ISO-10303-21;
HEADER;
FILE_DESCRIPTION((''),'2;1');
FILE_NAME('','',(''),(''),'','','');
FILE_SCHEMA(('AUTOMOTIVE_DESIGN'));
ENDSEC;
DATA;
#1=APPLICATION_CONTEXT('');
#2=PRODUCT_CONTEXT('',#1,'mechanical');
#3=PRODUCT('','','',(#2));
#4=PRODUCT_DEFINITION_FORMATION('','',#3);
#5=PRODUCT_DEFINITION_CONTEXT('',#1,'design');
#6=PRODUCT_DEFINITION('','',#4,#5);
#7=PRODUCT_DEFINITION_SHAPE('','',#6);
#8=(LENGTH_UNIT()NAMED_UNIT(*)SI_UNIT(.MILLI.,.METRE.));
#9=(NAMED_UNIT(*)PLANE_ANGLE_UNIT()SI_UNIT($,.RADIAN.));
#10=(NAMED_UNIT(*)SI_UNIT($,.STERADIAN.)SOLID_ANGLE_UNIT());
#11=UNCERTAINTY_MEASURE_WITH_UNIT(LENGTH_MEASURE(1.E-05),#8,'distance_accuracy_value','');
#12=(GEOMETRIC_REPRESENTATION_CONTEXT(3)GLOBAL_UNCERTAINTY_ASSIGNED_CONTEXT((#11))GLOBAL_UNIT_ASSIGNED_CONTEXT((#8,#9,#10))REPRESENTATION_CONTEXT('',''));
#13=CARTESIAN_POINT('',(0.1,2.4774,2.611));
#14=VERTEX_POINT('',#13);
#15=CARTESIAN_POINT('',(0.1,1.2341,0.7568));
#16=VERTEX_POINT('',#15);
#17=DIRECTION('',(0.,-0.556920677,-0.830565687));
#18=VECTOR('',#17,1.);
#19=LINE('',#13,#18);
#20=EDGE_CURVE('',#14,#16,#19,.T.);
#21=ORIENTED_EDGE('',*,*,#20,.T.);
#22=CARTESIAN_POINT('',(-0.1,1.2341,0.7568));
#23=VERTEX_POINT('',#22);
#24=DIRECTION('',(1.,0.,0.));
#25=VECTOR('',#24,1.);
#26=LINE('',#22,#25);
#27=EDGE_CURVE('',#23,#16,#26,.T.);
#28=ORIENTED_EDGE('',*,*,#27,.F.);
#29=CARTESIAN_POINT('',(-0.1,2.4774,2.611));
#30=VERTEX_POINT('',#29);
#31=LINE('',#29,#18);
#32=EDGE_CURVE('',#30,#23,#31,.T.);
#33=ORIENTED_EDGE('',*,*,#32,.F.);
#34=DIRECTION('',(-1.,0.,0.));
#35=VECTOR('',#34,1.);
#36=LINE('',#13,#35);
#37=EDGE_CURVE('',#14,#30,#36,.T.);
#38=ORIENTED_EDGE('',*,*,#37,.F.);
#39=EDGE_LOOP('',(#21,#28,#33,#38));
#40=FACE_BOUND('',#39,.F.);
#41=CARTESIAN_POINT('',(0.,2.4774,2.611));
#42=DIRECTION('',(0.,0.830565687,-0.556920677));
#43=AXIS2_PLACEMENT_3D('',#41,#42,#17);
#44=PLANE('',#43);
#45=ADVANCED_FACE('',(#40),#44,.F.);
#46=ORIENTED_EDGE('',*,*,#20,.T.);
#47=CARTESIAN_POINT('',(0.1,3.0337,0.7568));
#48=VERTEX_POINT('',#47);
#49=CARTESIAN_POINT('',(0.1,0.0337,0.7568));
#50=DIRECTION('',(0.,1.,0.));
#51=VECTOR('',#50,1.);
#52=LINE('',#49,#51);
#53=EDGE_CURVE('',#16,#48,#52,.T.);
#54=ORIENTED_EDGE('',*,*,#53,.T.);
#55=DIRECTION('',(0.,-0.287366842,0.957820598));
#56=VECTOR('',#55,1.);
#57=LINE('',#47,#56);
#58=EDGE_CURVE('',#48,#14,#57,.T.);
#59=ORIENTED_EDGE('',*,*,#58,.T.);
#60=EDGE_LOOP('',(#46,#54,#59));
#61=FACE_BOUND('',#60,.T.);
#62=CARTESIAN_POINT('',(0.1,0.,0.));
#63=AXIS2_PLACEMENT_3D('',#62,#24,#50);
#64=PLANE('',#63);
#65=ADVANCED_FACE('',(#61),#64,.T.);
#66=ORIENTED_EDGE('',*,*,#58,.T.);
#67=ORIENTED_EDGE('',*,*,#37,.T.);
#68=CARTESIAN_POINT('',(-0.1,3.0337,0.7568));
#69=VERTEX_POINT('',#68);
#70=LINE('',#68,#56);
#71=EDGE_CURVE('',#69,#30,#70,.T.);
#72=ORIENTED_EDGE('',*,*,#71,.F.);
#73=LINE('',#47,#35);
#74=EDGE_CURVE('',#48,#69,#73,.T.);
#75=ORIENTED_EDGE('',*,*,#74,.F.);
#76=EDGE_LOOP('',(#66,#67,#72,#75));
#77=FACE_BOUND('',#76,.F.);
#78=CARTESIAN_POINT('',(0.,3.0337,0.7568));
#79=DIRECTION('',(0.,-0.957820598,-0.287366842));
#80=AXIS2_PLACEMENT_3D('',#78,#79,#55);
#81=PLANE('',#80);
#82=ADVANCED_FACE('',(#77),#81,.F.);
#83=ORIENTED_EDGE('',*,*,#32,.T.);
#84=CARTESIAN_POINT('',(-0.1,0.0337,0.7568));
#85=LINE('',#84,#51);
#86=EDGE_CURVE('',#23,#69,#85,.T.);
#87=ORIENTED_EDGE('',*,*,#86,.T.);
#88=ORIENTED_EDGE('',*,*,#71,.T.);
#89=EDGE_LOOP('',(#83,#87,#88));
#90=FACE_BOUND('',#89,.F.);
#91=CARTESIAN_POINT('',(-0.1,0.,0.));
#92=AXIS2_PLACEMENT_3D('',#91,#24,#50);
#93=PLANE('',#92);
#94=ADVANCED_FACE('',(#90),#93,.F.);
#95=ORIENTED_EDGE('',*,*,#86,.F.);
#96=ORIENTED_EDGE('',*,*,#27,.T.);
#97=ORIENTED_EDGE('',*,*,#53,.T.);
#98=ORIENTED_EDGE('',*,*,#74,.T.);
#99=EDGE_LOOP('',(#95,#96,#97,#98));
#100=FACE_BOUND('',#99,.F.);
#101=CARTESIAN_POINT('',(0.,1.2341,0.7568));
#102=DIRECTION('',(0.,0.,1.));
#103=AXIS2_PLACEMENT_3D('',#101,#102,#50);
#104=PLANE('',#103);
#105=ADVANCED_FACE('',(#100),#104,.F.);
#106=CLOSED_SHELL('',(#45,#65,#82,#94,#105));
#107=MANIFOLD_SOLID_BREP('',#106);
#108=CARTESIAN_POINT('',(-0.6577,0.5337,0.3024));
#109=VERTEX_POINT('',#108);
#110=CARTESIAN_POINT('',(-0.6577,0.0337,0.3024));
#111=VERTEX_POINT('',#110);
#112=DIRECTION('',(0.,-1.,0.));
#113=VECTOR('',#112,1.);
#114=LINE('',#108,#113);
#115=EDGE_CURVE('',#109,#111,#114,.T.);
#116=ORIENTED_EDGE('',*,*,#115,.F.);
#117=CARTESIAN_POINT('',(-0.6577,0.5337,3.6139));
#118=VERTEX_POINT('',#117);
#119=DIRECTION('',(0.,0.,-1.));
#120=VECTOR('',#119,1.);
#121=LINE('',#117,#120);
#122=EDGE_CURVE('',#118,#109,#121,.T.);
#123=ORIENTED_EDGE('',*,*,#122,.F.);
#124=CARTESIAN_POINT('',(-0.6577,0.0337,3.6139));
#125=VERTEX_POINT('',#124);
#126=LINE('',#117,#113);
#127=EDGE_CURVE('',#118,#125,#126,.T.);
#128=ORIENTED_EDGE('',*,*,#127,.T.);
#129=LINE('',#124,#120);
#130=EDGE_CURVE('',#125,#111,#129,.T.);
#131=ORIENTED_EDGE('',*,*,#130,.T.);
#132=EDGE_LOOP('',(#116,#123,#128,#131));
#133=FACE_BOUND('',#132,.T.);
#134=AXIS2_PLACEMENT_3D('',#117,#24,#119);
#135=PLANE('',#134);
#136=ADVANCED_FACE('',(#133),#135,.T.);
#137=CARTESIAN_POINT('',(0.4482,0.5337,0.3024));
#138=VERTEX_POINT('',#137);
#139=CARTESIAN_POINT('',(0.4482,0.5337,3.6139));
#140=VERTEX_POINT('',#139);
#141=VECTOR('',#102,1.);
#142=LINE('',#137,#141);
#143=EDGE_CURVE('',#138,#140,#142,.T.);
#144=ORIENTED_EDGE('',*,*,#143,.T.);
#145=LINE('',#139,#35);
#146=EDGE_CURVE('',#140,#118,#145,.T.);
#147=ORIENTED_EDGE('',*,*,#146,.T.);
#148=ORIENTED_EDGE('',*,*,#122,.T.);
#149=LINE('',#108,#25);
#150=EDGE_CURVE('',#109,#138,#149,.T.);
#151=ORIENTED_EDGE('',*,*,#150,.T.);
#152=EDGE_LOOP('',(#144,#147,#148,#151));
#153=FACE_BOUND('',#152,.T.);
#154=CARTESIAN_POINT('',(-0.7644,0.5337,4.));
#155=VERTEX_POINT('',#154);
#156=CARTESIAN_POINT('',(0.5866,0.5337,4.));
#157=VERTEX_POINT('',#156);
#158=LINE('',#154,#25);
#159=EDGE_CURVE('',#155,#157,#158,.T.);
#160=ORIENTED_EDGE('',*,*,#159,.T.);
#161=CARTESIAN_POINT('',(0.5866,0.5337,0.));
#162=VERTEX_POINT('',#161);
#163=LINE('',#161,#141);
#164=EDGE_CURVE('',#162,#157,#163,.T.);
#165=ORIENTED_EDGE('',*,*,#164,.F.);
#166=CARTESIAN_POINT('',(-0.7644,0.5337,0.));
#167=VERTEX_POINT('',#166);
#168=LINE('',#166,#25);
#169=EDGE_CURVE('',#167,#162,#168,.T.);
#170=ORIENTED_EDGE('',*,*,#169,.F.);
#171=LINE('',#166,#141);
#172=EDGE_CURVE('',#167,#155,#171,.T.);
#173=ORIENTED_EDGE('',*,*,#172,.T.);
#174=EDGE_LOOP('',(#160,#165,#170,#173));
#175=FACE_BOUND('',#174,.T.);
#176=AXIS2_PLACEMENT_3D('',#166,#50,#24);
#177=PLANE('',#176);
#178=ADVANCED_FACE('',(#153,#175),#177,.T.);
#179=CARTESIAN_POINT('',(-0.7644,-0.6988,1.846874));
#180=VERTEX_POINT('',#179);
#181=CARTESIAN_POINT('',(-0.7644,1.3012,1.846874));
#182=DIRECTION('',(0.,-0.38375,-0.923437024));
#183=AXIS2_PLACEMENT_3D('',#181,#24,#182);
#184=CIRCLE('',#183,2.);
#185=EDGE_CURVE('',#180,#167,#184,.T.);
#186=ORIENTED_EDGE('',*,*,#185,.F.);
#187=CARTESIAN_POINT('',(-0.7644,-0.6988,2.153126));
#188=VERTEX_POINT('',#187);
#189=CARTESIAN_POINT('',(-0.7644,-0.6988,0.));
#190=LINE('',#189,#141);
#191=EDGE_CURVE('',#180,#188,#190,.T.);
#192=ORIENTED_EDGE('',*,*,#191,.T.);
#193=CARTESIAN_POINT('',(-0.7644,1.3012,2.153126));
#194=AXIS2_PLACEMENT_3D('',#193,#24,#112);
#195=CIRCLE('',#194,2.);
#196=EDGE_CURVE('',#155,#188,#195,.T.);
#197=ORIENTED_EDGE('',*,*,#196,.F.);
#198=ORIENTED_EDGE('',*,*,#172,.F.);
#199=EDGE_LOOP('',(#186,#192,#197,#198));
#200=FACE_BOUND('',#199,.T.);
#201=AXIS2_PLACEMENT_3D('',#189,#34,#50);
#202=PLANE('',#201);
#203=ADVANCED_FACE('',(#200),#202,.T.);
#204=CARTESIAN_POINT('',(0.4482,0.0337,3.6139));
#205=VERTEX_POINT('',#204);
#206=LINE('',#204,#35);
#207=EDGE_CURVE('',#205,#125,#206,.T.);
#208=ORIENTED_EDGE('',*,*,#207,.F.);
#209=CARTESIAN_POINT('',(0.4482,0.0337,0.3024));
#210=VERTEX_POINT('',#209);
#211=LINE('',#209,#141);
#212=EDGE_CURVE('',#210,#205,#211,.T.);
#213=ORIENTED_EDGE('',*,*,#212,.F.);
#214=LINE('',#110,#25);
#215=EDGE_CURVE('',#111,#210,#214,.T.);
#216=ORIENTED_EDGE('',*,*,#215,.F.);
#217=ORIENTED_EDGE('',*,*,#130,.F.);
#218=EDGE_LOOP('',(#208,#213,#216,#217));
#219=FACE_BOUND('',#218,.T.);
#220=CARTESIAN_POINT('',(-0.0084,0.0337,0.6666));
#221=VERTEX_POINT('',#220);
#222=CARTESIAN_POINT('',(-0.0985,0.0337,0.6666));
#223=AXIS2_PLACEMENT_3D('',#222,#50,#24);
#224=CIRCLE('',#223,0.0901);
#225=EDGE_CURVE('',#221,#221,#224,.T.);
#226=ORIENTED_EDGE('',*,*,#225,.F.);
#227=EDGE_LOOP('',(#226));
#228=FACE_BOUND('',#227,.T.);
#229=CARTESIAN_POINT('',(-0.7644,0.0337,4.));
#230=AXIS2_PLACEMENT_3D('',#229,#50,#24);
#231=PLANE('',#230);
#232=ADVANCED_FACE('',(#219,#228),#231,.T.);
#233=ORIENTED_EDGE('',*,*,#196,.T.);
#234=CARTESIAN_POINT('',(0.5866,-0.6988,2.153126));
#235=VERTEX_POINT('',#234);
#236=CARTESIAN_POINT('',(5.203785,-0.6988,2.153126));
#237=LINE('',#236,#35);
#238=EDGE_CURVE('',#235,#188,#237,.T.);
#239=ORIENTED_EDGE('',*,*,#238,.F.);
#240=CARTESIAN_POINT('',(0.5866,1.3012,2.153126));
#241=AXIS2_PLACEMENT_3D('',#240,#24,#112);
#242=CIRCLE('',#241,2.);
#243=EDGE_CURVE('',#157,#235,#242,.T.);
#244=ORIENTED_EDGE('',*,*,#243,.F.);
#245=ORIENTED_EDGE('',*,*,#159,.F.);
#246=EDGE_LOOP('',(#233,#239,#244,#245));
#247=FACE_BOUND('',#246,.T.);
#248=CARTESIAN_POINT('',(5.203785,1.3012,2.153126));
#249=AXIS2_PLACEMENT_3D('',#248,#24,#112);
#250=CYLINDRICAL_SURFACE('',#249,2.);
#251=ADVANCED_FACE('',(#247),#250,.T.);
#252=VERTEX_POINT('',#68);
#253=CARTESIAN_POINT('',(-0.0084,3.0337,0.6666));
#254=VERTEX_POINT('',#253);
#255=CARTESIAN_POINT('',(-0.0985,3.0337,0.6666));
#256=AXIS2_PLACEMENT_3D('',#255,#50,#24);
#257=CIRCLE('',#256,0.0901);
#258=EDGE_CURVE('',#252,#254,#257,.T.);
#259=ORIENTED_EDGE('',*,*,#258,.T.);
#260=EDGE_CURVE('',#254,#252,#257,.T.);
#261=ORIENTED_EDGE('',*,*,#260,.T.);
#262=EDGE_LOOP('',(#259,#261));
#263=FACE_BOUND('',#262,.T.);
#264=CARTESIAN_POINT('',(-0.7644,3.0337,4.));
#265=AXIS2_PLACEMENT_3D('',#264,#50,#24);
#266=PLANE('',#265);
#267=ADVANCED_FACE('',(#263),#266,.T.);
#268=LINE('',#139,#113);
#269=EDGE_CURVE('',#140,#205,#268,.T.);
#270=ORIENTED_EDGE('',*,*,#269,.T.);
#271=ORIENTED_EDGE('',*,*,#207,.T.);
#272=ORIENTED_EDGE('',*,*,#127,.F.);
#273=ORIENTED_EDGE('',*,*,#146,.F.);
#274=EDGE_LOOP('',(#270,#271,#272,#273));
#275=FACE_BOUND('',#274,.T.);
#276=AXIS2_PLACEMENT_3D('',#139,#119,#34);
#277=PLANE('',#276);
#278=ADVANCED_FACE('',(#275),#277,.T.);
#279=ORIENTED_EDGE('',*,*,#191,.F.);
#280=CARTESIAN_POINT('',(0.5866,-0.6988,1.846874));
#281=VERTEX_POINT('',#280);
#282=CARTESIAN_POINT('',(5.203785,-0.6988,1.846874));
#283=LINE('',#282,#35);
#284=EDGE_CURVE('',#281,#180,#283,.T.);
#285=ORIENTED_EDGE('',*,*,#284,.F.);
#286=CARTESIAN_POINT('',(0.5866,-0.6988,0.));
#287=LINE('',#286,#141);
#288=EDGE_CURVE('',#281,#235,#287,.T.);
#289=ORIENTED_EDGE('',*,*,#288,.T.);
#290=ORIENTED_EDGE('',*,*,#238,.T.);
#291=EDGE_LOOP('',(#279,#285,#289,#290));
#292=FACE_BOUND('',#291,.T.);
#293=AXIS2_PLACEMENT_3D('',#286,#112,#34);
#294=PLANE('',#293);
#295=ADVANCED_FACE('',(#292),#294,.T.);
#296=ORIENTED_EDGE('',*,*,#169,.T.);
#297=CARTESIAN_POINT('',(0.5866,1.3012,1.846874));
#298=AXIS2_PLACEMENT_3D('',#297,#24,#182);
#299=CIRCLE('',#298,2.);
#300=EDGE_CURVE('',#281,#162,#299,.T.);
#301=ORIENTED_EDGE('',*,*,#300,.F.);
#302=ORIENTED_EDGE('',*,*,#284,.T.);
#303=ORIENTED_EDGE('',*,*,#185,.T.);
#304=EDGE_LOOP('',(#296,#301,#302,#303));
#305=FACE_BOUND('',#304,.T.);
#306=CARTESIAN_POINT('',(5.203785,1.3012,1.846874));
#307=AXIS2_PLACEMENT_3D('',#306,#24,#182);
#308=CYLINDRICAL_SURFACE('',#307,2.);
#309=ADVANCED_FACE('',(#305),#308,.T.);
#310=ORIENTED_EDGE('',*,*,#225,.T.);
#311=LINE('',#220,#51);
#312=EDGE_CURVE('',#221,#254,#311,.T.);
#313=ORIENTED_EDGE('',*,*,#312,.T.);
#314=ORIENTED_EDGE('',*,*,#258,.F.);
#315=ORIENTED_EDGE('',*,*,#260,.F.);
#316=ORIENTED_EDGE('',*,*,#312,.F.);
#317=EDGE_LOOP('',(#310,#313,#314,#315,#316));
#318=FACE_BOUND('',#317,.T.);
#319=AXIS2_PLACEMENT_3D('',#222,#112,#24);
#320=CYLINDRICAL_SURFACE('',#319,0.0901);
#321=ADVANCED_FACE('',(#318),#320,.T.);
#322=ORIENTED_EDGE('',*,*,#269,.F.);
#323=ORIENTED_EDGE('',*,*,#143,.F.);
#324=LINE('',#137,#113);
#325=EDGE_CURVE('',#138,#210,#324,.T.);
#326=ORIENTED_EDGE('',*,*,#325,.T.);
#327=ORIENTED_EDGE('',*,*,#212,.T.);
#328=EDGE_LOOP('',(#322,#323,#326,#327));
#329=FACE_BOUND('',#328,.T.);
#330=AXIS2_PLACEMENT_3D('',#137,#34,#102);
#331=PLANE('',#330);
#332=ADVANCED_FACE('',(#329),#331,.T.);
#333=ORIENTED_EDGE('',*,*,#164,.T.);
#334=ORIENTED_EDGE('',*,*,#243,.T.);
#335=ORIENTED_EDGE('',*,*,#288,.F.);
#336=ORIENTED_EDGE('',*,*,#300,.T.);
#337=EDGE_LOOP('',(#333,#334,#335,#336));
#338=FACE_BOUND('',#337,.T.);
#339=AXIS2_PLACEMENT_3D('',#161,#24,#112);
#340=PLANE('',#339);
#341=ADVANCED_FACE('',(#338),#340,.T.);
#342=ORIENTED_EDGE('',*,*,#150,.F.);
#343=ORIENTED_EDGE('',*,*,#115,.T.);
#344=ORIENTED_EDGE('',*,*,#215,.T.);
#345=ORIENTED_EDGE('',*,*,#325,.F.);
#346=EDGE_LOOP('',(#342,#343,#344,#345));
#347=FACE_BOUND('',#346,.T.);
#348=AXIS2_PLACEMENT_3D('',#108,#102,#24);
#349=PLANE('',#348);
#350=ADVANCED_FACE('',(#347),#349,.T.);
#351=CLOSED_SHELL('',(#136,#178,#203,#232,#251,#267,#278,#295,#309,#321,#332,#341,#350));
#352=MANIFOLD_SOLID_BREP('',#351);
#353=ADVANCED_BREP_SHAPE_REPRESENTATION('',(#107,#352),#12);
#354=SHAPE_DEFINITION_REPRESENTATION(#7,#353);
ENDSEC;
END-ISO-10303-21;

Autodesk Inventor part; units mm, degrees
ref_plane "YZ Plane" through (0, 0, 0) normal (1, 0, 0) x (0, 1, 0)
ref_plane "XZ Plane" through (0, 0, 0) normal (0, 1, 0) x (-1, 0, 0)
ref_plane "XY Plane" through (0, 0, 0) normal (0, 0, 1) x (1, 0, 0)
sketch "Sketch1" plane through (0, 0, 0) normal (0, 0, 1) x (1, 0, 0)
  line L0 (-0.7644, 0.5337) -> (0.5866, 0.5337)
  line L1 (0.5866, 0.5337) -> (0.5866, -0.6988)
  line L2 (0.5866, -0.6988) -> (-0.7644, -0.6988)
  line L3 (-0.7644, -0.6988) -> (-0.7644, 0.5337)
  point P0 (0, 0)
extrude "Extrusion1" add sketch "Sketch1" along normal blind 4
fillet "Fillet1" radius 2 1 edges at (-0.0889, -0.6988, 4)
fillet "Fillet2" radius 2 1 edges at (-0.0889, -0.6988, 0)
sketch "Sketch2" plane through (-0.7644, 0.5337, 4) normal (0, 1, 0) x (1, 0, 0)
  line L0 (1.2126, 0.3861) -> (0.1067, 0.3861)
  line L1 (0.1067, 0.3861) -> (0.1067, 3.6976)
  line L2 (0.1067, 3.6976) -> (1.2126, 3.6976)
  line L3 (1.2126, 3.6976) -> (1.2126, 0.3861)
  point P0 (0.7644, 4)
extrude "Extrusion2" cut sketch "Sketch2" against normal blind 0.5
sketch "Sketch3" plane through (-0.7644, 0.0337, 4) normal (0, 1, 0) x (1, 0, 0)
  circle A0 centre (0.6659, 3.3334) radius 0.0901
  point P0 (0.7644, 4)
extrude "Extrusion3" add sketch "Sketch3" along normal blind 3
sketch "Sketch4" plane through (0, 0, 0) normal (1, 0, 0) x (0, 1, 0)
  line L0 (0.0337, 0.7568) -> (3.0337, 0.7568) projected
  line L1 (3.0337, 0.7568) -> (2.4774, 2.611)
  line L2 (2.4774, 2.611) -> (1.2341, 0.7568)
  line L3 (3.0337, 0.7568) -> (1.2341, 0.7568)
  point P0 (0, 0)
extrude "Extrusion4" add sketch "Sketch4" along normal mid plane 0.2
equation "\"BendRadius\" = Thickness"
equation "\"BendReliefWidth\" = Thickness"
equation "\"BendReliefDepth\" = 0.5 * Thickness"
equation "\"CornerReliefSize\" = 4 * Thickness"
equation "\"MinimumRemnant\" = 2 * Thickness"
equation "\"TransitionRadius\" = BendRadius"
equation "\"JacobiRadiusSize\" = BendRadius"
equation "\"GapSize\" = Thickness"
equation "\"Thickness\" = 0.5"
